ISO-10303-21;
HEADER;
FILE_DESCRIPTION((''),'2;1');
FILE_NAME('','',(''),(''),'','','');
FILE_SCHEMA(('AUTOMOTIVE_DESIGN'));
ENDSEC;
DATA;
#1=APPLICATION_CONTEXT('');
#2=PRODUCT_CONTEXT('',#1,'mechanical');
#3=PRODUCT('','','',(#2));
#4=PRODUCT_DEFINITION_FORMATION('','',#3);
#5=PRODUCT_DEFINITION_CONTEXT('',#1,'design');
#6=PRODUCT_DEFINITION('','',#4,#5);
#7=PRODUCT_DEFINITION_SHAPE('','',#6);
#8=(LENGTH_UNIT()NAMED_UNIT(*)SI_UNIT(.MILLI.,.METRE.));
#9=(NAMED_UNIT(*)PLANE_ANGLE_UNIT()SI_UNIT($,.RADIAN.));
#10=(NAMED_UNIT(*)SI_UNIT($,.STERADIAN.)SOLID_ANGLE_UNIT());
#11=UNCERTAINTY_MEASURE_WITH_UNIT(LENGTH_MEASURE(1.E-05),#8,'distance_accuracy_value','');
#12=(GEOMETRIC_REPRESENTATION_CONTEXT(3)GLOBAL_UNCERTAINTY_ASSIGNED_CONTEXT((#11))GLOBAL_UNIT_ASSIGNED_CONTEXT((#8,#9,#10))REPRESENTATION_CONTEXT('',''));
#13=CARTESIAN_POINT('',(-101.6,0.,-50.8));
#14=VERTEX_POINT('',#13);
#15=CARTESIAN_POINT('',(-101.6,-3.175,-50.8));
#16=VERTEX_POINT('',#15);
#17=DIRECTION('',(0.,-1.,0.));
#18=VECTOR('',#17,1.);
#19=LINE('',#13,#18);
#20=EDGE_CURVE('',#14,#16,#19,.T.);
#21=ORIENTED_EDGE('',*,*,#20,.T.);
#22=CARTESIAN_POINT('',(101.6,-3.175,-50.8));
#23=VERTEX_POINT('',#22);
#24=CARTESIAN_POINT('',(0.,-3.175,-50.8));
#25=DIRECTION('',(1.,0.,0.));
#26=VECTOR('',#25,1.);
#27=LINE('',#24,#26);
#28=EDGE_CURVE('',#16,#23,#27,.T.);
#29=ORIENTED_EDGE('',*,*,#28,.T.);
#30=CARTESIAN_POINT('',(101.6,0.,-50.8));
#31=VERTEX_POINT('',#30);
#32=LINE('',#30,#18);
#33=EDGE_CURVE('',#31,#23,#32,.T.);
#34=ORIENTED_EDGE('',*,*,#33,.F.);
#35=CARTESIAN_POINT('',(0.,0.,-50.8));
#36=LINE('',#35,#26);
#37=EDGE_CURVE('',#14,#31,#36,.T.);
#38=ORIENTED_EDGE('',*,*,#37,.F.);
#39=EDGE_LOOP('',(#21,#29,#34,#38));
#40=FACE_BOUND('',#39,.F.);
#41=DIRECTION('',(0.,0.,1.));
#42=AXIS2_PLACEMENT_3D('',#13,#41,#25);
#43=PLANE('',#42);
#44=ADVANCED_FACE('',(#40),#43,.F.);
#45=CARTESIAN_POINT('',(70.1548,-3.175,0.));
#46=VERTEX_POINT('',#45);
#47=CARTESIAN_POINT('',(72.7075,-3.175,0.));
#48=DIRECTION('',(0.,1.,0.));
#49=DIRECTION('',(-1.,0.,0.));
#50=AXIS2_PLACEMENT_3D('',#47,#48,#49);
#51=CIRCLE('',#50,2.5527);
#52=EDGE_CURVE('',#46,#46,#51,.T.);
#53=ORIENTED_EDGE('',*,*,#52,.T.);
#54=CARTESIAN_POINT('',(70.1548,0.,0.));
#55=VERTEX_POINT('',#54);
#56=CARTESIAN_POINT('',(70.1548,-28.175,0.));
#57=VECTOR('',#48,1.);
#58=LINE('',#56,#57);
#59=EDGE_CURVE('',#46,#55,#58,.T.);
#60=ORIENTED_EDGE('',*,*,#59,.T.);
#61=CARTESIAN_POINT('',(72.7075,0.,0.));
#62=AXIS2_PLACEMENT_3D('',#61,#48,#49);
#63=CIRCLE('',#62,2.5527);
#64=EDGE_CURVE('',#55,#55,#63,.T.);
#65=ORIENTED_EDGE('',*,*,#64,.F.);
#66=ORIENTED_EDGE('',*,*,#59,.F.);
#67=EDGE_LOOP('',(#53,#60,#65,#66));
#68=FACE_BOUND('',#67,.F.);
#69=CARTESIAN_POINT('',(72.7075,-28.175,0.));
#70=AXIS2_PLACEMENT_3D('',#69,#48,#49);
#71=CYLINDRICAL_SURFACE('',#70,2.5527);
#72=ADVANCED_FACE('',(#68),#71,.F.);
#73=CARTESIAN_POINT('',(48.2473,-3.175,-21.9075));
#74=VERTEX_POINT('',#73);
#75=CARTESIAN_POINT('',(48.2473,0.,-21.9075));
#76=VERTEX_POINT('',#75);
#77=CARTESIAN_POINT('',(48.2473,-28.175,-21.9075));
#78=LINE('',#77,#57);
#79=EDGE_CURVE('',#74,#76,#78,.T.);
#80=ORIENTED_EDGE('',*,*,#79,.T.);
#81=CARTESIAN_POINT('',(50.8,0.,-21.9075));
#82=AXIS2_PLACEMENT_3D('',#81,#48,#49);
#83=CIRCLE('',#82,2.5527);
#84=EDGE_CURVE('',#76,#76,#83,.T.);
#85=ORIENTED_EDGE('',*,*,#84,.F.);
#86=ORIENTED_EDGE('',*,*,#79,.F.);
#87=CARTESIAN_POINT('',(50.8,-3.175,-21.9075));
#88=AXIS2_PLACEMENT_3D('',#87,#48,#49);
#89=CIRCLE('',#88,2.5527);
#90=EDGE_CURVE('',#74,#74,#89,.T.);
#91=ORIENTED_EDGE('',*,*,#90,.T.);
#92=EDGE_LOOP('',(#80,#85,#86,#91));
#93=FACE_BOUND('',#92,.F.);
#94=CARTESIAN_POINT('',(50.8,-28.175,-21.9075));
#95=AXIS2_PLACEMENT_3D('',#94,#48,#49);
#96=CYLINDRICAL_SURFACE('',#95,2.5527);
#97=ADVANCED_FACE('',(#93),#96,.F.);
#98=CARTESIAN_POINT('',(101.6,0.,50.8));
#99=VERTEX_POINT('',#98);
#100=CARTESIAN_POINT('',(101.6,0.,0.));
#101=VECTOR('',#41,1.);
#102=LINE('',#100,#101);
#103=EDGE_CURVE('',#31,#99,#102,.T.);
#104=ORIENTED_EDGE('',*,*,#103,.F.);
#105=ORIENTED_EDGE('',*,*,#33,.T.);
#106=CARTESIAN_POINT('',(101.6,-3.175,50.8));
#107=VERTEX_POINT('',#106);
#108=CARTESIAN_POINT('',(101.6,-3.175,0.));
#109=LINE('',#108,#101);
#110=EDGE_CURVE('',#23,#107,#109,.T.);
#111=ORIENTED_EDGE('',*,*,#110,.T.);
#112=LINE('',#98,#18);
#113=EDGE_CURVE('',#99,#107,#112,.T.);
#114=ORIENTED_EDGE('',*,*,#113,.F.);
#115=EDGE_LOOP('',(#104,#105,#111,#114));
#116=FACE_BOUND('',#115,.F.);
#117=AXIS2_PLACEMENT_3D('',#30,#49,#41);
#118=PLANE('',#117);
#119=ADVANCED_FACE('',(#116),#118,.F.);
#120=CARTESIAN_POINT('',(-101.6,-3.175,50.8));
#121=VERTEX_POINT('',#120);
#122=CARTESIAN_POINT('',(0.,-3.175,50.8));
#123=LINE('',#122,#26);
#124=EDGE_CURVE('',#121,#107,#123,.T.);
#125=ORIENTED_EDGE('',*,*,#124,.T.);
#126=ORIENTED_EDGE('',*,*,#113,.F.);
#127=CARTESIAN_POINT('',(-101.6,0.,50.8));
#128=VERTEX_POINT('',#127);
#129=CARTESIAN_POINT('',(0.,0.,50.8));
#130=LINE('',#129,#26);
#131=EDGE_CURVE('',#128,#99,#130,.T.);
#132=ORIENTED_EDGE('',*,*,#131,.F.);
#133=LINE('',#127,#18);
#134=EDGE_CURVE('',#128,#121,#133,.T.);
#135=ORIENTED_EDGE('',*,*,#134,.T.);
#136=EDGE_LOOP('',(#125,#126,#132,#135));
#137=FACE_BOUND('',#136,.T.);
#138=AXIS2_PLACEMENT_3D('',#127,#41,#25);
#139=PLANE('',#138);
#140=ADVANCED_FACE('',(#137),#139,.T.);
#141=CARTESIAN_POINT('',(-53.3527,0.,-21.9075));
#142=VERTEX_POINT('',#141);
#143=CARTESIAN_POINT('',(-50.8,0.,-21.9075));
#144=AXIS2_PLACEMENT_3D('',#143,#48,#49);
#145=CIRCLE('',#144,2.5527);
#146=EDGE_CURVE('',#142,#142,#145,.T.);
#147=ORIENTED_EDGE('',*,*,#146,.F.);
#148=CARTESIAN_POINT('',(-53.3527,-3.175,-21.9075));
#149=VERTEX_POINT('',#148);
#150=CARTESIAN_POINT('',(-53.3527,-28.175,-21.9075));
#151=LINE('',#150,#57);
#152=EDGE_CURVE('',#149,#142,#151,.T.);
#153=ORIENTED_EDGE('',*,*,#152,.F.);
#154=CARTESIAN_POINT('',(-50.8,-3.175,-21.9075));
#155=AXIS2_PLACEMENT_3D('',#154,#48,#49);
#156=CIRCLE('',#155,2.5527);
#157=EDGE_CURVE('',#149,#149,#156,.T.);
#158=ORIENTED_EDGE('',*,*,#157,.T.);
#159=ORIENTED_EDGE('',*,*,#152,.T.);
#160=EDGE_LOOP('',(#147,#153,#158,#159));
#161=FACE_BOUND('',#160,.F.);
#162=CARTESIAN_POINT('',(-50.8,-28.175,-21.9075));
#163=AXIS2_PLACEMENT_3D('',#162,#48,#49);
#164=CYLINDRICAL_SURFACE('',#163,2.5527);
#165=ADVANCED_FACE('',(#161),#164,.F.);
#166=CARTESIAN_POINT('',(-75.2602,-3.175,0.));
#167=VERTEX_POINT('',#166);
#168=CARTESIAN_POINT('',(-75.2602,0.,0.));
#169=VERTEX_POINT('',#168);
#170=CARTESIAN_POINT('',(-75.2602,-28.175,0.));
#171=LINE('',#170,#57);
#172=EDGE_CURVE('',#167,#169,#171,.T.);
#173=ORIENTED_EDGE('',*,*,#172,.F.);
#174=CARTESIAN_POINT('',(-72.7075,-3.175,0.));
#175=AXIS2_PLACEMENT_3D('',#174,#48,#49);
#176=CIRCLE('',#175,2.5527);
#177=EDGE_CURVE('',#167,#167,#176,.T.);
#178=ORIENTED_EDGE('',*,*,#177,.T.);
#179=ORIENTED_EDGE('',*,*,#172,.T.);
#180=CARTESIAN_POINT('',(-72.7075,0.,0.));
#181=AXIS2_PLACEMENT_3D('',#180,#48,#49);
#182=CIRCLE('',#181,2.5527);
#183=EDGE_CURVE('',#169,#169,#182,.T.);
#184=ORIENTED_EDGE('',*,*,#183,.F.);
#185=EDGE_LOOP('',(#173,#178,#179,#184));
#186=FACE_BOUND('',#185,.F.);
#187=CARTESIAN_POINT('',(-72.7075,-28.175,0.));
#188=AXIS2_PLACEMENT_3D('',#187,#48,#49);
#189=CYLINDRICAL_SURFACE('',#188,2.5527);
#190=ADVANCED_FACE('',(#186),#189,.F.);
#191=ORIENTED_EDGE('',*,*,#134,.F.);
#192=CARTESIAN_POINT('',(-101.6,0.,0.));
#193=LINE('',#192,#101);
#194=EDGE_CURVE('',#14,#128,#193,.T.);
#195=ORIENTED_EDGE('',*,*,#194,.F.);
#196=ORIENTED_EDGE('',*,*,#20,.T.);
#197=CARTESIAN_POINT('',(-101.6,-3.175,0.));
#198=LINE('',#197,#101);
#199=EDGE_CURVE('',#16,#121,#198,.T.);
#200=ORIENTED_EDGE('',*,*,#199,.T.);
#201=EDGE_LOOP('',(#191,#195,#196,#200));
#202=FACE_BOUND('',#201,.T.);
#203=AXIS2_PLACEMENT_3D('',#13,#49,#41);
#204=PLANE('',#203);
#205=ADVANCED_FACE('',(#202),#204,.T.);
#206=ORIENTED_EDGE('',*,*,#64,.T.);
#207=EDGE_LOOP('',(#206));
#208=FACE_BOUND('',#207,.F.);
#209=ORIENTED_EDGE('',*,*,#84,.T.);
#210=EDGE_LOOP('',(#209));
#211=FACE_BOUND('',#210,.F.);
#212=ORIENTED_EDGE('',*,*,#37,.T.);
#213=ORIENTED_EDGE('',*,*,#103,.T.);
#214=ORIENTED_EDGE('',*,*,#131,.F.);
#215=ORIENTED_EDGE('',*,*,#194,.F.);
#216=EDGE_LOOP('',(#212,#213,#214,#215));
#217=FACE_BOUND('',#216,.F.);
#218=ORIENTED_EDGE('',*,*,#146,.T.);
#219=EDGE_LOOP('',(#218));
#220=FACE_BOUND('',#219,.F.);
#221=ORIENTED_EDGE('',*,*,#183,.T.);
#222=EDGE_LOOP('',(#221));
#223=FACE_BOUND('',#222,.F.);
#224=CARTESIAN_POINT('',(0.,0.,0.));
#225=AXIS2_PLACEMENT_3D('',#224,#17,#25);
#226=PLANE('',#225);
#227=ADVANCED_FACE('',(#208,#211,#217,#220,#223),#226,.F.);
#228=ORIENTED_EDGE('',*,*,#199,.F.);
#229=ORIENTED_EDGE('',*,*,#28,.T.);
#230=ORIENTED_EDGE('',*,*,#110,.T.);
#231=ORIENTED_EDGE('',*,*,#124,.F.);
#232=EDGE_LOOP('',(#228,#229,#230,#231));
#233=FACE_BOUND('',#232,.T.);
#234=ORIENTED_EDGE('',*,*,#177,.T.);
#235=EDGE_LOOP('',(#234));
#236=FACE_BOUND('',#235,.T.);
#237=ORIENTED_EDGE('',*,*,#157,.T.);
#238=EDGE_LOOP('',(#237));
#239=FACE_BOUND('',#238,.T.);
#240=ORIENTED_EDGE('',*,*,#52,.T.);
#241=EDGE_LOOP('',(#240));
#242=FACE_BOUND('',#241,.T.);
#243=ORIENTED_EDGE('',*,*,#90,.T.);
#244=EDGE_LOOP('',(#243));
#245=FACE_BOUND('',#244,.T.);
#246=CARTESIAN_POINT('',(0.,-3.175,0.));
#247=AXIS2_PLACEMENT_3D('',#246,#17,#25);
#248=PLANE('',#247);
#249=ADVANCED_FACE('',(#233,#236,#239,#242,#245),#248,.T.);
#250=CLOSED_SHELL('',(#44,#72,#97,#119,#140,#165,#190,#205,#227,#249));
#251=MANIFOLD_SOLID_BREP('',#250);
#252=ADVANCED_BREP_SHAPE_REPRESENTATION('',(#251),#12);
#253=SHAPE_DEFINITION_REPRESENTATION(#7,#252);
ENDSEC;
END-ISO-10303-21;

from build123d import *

# Parameters (mm, degrees)
F0_W     = 203.2
F0_H     = 101.6
F1_DEPTH = 3.175
F3_D     = 5.1054
F3_DEPTH = 25
F3_TIP   = 1.5338169022


# Not quite as in the source:
# - a length typed as a fraction of an inch, garbled in the dataset ("3 / 203.2 mm" for 3/8 in), is restored


with BuildPart() as f1:
    # F0 (on Front) → F1 (new body)
    with BuildSketch(Plane.XZ):
        Rectangle(F0_W, F0_H)
    extrude(amount=F1_DEPTH)

    # F3
    with Locations(Plane.XZ.offset(3.175)):
        with Locations((-50.8, -21.9075), (50.8, -21.9075), (-72.7075, 0), (72.7075, 0)):
            Hole(F3_D / 2, depth=F3_DEPTH)
            with Locations((0, 0, -(F3_DEPTH + F3_TIP / 2))):  # 118° drill point
                Cone(0, F3_D / 2, F3_TIP, mode=Mode.SUBTRACT)


solid = f1.part
